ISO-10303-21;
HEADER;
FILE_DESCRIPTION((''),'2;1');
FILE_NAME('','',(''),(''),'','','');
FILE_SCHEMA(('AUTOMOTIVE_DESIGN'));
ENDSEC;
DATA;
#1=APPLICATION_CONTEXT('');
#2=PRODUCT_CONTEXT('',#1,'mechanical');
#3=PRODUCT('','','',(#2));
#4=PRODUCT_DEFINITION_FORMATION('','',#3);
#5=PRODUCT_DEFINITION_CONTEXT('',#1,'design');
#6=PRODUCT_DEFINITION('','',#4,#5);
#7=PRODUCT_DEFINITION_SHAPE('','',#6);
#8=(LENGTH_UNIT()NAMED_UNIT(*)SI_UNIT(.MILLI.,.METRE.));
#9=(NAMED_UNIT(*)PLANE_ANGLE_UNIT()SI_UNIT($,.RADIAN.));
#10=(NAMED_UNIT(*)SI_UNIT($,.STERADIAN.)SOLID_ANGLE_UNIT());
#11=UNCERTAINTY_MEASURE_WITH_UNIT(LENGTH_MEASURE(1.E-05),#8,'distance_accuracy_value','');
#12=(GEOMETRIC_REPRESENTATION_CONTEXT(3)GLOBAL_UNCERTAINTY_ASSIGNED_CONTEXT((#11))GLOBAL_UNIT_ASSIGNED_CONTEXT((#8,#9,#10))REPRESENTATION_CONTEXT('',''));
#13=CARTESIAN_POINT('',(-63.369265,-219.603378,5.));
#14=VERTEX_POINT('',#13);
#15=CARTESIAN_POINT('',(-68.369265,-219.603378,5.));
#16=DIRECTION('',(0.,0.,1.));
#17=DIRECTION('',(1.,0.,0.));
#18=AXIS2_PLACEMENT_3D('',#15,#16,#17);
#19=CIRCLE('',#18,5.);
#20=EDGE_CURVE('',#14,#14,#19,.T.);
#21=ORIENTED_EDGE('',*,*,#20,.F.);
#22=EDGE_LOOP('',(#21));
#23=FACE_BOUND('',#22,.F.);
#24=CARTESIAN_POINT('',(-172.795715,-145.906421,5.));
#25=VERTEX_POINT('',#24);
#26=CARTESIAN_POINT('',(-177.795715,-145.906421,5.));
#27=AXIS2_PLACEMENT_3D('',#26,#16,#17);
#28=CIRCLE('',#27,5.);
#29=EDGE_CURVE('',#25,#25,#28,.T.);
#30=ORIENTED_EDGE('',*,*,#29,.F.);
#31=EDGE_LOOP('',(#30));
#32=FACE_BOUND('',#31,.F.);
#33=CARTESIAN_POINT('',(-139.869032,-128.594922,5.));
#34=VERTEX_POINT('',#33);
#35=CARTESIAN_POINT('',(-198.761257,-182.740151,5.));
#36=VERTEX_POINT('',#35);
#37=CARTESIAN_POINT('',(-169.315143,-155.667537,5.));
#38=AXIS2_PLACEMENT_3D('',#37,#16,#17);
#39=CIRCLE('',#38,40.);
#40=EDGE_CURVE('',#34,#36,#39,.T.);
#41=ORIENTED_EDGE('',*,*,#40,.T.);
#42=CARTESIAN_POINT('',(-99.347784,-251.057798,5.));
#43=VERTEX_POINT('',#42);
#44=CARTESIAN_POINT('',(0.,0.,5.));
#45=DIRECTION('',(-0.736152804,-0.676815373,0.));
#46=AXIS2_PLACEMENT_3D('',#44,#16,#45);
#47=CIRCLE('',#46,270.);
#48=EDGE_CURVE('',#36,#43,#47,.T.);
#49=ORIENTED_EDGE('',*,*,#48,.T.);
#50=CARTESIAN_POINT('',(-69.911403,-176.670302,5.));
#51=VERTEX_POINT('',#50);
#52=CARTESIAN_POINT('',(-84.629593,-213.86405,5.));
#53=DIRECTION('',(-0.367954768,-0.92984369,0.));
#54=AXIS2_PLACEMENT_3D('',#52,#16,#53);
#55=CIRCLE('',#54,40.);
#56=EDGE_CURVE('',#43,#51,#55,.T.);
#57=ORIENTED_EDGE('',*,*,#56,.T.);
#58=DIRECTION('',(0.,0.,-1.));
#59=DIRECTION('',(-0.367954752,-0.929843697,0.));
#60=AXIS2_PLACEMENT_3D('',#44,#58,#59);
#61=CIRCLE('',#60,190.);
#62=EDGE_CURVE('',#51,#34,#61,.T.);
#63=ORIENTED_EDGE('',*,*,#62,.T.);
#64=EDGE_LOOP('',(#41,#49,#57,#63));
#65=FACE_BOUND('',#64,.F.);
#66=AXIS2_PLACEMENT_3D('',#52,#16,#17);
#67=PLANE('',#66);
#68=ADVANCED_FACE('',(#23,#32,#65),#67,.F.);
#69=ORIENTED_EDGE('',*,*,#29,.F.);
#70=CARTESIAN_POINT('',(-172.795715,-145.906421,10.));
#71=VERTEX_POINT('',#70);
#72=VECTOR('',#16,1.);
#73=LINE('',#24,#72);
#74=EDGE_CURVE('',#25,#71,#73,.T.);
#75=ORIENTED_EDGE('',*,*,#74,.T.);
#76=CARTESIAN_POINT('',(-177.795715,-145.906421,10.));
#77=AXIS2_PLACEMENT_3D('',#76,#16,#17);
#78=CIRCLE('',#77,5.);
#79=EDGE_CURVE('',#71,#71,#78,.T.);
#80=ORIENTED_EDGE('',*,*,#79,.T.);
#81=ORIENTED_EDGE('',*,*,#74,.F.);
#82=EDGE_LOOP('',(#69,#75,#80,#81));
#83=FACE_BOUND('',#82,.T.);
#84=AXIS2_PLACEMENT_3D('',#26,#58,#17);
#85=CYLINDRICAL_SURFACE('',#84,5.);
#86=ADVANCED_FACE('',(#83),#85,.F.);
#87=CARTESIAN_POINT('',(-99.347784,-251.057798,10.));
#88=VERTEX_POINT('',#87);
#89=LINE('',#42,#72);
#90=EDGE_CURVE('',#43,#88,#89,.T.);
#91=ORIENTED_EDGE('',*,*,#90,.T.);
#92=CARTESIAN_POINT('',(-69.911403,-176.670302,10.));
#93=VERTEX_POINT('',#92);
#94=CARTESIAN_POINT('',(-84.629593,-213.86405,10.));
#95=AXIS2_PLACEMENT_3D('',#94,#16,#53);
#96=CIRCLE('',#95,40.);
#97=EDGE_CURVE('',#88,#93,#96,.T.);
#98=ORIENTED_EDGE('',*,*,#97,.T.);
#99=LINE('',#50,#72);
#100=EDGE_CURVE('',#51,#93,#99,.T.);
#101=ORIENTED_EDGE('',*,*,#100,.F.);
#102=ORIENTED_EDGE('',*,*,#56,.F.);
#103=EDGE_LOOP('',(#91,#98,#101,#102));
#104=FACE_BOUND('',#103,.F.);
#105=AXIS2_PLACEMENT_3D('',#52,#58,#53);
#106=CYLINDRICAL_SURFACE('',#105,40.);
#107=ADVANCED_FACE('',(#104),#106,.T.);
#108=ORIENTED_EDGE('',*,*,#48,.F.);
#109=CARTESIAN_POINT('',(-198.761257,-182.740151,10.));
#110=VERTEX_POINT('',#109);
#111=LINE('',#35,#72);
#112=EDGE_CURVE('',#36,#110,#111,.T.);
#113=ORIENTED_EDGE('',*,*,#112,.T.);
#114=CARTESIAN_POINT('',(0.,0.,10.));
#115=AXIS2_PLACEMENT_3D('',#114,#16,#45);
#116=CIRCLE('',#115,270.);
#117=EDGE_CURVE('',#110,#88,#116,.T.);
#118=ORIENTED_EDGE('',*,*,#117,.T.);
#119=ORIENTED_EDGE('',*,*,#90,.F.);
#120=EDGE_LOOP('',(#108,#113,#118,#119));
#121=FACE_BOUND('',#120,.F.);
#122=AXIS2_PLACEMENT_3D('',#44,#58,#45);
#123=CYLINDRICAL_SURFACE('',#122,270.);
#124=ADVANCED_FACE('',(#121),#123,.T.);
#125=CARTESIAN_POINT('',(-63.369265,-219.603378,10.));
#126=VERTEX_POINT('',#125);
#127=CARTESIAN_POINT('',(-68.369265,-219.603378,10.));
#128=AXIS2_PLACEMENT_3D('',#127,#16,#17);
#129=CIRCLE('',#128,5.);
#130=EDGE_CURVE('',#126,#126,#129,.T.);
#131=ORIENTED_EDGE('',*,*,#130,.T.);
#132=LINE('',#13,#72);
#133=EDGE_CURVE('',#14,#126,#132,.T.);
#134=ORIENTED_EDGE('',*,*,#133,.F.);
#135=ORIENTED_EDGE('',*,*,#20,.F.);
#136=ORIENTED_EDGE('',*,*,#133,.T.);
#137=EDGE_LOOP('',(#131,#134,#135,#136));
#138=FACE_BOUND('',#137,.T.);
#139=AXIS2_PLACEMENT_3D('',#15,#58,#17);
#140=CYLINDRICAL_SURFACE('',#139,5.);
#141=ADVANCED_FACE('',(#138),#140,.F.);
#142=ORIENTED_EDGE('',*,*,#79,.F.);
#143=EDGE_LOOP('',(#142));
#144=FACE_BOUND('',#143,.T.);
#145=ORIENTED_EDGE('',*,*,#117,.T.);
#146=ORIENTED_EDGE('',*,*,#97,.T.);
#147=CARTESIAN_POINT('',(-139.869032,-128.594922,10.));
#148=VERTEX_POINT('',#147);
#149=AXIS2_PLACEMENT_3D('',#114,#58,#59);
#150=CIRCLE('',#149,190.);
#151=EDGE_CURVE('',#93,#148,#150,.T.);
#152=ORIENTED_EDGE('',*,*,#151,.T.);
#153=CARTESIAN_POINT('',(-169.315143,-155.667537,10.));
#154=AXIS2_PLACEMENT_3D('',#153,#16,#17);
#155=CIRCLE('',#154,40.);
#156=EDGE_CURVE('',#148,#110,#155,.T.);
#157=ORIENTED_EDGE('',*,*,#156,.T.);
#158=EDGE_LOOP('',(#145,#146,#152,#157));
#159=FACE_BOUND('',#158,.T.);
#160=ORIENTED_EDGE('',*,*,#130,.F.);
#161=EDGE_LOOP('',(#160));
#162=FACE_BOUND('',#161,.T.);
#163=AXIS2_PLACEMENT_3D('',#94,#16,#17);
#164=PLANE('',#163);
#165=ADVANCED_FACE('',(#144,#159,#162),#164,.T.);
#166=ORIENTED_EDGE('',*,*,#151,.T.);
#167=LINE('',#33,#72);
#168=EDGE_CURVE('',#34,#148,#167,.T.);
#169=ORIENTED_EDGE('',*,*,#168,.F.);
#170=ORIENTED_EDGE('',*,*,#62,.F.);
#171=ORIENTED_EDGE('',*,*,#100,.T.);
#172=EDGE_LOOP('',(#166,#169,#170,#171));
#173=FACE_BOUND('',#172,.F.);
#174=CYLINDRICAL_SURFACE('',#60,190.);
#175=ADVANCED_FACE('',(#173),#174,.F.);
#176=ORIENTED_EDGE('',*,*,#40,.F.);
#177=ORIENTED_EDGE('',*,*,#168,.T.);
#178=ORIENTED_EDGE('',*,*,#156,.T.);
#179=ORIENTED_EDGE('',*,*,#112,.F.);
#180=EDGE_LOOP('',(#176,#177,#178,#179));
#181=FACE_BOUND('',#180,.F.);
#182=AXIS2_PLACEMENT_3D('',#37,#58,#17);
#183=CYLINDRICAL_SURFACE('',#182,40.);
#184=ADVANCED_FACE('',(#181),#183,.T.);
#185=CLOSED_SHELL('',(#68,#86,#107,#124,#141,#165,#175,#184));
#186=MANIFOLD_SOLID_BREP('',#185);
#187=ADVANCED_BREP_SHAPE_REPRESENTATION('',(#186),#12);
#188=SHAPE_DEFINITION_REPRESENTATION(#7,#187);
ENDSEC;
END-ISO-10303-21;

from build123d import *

# Parameters (mm, degrees)
F0_W     = 169.7224378586
F0_H     = 29.1480664164
F1_DEPTH = 5
F2_R     = 5
F3_DEPTH = 5.001
F6_R     = 5
F7_DEPTH = 5


# Not quite as in the source:
# - a feature of the source that left no trace in its solid (it failed there, or was rolled back) is left out


with BuildPart() as f1:
    # F0 (on Top) → F1 (new body)
    with BuildSketch(Plane.XY):
        with Locations((-209.8612189293, 14.5740332082)):
            Rectangle(F0_W, F0_H)
        Polygon((125, -249.6209740639), (125, -125), (-125, -125), (-125, 0), (-294.7224378586, 0), (-294.7224378586, -249.6209740639), align=None)
        Polygon((124.7859969735, -298.5799014568), (125, -249.6209740639), (-294.7224378586, -249.6209740639), (-294.7224378586, -298.5799014568), align=None)
    extrude(amount=F1_DEPTH)

    # F2 (on face) → F3 (cut, through all)
    with BuildSketch(Plane.XY.offset(5)):
        with Locations((-228.7230412454, -24.2026941362)):
            Circle(F2_R)
        with Locations((-219.7715429866, -67.8267564705)):
            Circle(F2_R)
        with Locations((-202.5809461153, -108.9080358424)):
            Circle(F2_R)
        with Locations((-177.7957154285, -145.9064206102)):
            Circle(F2_R)
        with Locations((-146.3450338267, -177.4348643144)):
            Circle(F2_R)
        with Locations((-109.4079678244, -202.3113851876)):
            Circle(F2_R)
        with Locations((-68.3692650785, -219.6033779172)):
            Circle(F2_R)
        with Locations((-24.7674410595, -228.6625764382)):
            Circle(F2_R)
        with Locations((19.7628989378, -229.1493570263)):
            Circle(F2_R)
        with Locations((63.5523401318, -221.0454705796)):
            Circle(F2_R)
    extrude(amount=-F3_DEPTH, mode=Mode.SUBTRACT)


with BuildPart() as f7:
    # F6 (on face) → F7 (new body)
    with BuildSketch(Plane.XY.offset(5)):
        with BuildLine():
            ThreePointArc((-44.6295934942, -213.8640500528), (-51.5484234193, -191.3776944906), (-69.9114028179, -176.6703024168))
            ThreePointArc((-69.9114028179, -176.6703024168), (-121.8233411216, -199.1458593545), (-99.3477842144, -251.0577976715))
            ThreePointArc((-99.3477842144, -251.0577976715), (-62.1432379515, -246.945220141), (-44.6295934942, -213.8640500528))
        make_face()
        with Locations((-109.4079678244, -202.3113851876)):
            Circle(F6_R, mode=Mode.SUBTRACT)
        with Locations((-68.3692650785, -219.6033779172)):
            Circle(F6_R, mode=Mode.SUBTRACT)
        with BuildLine():
            ThreePointArc((-139.8690317235, -128.5949220021), (-132.0468964749, -141.1390217828), (-129.3151434854, -155.6675373561))
            ThreePointArc((-129.3151434854, -155.6675373561), (-154.7866291142, -192.9357848352), (-198.7612569937, -182.7401508106))
            ThreePointArc((-198.7612569937, -182.7401508106), (-152.9185251389, -222.5217397679), (-99.3477842144, -251.0577976715))
            ThreePointArc((-99.3477842144, -251.0577976715), (-121.8233411216, -199.1458593545), (-69.9114028179, -176.6703024168))
            ThreePointArc((-69.9114028179, -176.6703024168), (-107.6093315173, -156.5893731081), (-139.8690317235, -128.5949220021))
        make_face()
        with BuildLine():
            ThreePointArc((-198.7612569937, -182.7401508106), (-154.7866291142, -192.9357848352), (-129.3151434854, -155.6675373561))
            ThreePointArc((-129.3151434854, -155.6675373561), (-132.0468964749, -141.1390217828), (-139.8690317235, -128.5949220021))
            ThreePointArc((-139.8690317235, -128.5949220021), (-196.3877578897, -126.221424721), (-198.7612569937, -182.7401508106))
        make_face()
        with Locations((-146.3450338267, -177.4348643144)):
            Circle(F6_R, mode=Mode.SUBTRACT)
        with Locations((-177.7957154285, -145.9064206102)):
            Circle(F6_R, mode=Mode.SUBTRACT)
        with Locations((-109.4079678244, -202.3113851876)):
            Circle(F6_R)
        with Locations((-146.3450338267, -177.4348643144)):
            Circle(F6_R)
    extrude(amount=F7_DEPTH)


solid = f7.part
